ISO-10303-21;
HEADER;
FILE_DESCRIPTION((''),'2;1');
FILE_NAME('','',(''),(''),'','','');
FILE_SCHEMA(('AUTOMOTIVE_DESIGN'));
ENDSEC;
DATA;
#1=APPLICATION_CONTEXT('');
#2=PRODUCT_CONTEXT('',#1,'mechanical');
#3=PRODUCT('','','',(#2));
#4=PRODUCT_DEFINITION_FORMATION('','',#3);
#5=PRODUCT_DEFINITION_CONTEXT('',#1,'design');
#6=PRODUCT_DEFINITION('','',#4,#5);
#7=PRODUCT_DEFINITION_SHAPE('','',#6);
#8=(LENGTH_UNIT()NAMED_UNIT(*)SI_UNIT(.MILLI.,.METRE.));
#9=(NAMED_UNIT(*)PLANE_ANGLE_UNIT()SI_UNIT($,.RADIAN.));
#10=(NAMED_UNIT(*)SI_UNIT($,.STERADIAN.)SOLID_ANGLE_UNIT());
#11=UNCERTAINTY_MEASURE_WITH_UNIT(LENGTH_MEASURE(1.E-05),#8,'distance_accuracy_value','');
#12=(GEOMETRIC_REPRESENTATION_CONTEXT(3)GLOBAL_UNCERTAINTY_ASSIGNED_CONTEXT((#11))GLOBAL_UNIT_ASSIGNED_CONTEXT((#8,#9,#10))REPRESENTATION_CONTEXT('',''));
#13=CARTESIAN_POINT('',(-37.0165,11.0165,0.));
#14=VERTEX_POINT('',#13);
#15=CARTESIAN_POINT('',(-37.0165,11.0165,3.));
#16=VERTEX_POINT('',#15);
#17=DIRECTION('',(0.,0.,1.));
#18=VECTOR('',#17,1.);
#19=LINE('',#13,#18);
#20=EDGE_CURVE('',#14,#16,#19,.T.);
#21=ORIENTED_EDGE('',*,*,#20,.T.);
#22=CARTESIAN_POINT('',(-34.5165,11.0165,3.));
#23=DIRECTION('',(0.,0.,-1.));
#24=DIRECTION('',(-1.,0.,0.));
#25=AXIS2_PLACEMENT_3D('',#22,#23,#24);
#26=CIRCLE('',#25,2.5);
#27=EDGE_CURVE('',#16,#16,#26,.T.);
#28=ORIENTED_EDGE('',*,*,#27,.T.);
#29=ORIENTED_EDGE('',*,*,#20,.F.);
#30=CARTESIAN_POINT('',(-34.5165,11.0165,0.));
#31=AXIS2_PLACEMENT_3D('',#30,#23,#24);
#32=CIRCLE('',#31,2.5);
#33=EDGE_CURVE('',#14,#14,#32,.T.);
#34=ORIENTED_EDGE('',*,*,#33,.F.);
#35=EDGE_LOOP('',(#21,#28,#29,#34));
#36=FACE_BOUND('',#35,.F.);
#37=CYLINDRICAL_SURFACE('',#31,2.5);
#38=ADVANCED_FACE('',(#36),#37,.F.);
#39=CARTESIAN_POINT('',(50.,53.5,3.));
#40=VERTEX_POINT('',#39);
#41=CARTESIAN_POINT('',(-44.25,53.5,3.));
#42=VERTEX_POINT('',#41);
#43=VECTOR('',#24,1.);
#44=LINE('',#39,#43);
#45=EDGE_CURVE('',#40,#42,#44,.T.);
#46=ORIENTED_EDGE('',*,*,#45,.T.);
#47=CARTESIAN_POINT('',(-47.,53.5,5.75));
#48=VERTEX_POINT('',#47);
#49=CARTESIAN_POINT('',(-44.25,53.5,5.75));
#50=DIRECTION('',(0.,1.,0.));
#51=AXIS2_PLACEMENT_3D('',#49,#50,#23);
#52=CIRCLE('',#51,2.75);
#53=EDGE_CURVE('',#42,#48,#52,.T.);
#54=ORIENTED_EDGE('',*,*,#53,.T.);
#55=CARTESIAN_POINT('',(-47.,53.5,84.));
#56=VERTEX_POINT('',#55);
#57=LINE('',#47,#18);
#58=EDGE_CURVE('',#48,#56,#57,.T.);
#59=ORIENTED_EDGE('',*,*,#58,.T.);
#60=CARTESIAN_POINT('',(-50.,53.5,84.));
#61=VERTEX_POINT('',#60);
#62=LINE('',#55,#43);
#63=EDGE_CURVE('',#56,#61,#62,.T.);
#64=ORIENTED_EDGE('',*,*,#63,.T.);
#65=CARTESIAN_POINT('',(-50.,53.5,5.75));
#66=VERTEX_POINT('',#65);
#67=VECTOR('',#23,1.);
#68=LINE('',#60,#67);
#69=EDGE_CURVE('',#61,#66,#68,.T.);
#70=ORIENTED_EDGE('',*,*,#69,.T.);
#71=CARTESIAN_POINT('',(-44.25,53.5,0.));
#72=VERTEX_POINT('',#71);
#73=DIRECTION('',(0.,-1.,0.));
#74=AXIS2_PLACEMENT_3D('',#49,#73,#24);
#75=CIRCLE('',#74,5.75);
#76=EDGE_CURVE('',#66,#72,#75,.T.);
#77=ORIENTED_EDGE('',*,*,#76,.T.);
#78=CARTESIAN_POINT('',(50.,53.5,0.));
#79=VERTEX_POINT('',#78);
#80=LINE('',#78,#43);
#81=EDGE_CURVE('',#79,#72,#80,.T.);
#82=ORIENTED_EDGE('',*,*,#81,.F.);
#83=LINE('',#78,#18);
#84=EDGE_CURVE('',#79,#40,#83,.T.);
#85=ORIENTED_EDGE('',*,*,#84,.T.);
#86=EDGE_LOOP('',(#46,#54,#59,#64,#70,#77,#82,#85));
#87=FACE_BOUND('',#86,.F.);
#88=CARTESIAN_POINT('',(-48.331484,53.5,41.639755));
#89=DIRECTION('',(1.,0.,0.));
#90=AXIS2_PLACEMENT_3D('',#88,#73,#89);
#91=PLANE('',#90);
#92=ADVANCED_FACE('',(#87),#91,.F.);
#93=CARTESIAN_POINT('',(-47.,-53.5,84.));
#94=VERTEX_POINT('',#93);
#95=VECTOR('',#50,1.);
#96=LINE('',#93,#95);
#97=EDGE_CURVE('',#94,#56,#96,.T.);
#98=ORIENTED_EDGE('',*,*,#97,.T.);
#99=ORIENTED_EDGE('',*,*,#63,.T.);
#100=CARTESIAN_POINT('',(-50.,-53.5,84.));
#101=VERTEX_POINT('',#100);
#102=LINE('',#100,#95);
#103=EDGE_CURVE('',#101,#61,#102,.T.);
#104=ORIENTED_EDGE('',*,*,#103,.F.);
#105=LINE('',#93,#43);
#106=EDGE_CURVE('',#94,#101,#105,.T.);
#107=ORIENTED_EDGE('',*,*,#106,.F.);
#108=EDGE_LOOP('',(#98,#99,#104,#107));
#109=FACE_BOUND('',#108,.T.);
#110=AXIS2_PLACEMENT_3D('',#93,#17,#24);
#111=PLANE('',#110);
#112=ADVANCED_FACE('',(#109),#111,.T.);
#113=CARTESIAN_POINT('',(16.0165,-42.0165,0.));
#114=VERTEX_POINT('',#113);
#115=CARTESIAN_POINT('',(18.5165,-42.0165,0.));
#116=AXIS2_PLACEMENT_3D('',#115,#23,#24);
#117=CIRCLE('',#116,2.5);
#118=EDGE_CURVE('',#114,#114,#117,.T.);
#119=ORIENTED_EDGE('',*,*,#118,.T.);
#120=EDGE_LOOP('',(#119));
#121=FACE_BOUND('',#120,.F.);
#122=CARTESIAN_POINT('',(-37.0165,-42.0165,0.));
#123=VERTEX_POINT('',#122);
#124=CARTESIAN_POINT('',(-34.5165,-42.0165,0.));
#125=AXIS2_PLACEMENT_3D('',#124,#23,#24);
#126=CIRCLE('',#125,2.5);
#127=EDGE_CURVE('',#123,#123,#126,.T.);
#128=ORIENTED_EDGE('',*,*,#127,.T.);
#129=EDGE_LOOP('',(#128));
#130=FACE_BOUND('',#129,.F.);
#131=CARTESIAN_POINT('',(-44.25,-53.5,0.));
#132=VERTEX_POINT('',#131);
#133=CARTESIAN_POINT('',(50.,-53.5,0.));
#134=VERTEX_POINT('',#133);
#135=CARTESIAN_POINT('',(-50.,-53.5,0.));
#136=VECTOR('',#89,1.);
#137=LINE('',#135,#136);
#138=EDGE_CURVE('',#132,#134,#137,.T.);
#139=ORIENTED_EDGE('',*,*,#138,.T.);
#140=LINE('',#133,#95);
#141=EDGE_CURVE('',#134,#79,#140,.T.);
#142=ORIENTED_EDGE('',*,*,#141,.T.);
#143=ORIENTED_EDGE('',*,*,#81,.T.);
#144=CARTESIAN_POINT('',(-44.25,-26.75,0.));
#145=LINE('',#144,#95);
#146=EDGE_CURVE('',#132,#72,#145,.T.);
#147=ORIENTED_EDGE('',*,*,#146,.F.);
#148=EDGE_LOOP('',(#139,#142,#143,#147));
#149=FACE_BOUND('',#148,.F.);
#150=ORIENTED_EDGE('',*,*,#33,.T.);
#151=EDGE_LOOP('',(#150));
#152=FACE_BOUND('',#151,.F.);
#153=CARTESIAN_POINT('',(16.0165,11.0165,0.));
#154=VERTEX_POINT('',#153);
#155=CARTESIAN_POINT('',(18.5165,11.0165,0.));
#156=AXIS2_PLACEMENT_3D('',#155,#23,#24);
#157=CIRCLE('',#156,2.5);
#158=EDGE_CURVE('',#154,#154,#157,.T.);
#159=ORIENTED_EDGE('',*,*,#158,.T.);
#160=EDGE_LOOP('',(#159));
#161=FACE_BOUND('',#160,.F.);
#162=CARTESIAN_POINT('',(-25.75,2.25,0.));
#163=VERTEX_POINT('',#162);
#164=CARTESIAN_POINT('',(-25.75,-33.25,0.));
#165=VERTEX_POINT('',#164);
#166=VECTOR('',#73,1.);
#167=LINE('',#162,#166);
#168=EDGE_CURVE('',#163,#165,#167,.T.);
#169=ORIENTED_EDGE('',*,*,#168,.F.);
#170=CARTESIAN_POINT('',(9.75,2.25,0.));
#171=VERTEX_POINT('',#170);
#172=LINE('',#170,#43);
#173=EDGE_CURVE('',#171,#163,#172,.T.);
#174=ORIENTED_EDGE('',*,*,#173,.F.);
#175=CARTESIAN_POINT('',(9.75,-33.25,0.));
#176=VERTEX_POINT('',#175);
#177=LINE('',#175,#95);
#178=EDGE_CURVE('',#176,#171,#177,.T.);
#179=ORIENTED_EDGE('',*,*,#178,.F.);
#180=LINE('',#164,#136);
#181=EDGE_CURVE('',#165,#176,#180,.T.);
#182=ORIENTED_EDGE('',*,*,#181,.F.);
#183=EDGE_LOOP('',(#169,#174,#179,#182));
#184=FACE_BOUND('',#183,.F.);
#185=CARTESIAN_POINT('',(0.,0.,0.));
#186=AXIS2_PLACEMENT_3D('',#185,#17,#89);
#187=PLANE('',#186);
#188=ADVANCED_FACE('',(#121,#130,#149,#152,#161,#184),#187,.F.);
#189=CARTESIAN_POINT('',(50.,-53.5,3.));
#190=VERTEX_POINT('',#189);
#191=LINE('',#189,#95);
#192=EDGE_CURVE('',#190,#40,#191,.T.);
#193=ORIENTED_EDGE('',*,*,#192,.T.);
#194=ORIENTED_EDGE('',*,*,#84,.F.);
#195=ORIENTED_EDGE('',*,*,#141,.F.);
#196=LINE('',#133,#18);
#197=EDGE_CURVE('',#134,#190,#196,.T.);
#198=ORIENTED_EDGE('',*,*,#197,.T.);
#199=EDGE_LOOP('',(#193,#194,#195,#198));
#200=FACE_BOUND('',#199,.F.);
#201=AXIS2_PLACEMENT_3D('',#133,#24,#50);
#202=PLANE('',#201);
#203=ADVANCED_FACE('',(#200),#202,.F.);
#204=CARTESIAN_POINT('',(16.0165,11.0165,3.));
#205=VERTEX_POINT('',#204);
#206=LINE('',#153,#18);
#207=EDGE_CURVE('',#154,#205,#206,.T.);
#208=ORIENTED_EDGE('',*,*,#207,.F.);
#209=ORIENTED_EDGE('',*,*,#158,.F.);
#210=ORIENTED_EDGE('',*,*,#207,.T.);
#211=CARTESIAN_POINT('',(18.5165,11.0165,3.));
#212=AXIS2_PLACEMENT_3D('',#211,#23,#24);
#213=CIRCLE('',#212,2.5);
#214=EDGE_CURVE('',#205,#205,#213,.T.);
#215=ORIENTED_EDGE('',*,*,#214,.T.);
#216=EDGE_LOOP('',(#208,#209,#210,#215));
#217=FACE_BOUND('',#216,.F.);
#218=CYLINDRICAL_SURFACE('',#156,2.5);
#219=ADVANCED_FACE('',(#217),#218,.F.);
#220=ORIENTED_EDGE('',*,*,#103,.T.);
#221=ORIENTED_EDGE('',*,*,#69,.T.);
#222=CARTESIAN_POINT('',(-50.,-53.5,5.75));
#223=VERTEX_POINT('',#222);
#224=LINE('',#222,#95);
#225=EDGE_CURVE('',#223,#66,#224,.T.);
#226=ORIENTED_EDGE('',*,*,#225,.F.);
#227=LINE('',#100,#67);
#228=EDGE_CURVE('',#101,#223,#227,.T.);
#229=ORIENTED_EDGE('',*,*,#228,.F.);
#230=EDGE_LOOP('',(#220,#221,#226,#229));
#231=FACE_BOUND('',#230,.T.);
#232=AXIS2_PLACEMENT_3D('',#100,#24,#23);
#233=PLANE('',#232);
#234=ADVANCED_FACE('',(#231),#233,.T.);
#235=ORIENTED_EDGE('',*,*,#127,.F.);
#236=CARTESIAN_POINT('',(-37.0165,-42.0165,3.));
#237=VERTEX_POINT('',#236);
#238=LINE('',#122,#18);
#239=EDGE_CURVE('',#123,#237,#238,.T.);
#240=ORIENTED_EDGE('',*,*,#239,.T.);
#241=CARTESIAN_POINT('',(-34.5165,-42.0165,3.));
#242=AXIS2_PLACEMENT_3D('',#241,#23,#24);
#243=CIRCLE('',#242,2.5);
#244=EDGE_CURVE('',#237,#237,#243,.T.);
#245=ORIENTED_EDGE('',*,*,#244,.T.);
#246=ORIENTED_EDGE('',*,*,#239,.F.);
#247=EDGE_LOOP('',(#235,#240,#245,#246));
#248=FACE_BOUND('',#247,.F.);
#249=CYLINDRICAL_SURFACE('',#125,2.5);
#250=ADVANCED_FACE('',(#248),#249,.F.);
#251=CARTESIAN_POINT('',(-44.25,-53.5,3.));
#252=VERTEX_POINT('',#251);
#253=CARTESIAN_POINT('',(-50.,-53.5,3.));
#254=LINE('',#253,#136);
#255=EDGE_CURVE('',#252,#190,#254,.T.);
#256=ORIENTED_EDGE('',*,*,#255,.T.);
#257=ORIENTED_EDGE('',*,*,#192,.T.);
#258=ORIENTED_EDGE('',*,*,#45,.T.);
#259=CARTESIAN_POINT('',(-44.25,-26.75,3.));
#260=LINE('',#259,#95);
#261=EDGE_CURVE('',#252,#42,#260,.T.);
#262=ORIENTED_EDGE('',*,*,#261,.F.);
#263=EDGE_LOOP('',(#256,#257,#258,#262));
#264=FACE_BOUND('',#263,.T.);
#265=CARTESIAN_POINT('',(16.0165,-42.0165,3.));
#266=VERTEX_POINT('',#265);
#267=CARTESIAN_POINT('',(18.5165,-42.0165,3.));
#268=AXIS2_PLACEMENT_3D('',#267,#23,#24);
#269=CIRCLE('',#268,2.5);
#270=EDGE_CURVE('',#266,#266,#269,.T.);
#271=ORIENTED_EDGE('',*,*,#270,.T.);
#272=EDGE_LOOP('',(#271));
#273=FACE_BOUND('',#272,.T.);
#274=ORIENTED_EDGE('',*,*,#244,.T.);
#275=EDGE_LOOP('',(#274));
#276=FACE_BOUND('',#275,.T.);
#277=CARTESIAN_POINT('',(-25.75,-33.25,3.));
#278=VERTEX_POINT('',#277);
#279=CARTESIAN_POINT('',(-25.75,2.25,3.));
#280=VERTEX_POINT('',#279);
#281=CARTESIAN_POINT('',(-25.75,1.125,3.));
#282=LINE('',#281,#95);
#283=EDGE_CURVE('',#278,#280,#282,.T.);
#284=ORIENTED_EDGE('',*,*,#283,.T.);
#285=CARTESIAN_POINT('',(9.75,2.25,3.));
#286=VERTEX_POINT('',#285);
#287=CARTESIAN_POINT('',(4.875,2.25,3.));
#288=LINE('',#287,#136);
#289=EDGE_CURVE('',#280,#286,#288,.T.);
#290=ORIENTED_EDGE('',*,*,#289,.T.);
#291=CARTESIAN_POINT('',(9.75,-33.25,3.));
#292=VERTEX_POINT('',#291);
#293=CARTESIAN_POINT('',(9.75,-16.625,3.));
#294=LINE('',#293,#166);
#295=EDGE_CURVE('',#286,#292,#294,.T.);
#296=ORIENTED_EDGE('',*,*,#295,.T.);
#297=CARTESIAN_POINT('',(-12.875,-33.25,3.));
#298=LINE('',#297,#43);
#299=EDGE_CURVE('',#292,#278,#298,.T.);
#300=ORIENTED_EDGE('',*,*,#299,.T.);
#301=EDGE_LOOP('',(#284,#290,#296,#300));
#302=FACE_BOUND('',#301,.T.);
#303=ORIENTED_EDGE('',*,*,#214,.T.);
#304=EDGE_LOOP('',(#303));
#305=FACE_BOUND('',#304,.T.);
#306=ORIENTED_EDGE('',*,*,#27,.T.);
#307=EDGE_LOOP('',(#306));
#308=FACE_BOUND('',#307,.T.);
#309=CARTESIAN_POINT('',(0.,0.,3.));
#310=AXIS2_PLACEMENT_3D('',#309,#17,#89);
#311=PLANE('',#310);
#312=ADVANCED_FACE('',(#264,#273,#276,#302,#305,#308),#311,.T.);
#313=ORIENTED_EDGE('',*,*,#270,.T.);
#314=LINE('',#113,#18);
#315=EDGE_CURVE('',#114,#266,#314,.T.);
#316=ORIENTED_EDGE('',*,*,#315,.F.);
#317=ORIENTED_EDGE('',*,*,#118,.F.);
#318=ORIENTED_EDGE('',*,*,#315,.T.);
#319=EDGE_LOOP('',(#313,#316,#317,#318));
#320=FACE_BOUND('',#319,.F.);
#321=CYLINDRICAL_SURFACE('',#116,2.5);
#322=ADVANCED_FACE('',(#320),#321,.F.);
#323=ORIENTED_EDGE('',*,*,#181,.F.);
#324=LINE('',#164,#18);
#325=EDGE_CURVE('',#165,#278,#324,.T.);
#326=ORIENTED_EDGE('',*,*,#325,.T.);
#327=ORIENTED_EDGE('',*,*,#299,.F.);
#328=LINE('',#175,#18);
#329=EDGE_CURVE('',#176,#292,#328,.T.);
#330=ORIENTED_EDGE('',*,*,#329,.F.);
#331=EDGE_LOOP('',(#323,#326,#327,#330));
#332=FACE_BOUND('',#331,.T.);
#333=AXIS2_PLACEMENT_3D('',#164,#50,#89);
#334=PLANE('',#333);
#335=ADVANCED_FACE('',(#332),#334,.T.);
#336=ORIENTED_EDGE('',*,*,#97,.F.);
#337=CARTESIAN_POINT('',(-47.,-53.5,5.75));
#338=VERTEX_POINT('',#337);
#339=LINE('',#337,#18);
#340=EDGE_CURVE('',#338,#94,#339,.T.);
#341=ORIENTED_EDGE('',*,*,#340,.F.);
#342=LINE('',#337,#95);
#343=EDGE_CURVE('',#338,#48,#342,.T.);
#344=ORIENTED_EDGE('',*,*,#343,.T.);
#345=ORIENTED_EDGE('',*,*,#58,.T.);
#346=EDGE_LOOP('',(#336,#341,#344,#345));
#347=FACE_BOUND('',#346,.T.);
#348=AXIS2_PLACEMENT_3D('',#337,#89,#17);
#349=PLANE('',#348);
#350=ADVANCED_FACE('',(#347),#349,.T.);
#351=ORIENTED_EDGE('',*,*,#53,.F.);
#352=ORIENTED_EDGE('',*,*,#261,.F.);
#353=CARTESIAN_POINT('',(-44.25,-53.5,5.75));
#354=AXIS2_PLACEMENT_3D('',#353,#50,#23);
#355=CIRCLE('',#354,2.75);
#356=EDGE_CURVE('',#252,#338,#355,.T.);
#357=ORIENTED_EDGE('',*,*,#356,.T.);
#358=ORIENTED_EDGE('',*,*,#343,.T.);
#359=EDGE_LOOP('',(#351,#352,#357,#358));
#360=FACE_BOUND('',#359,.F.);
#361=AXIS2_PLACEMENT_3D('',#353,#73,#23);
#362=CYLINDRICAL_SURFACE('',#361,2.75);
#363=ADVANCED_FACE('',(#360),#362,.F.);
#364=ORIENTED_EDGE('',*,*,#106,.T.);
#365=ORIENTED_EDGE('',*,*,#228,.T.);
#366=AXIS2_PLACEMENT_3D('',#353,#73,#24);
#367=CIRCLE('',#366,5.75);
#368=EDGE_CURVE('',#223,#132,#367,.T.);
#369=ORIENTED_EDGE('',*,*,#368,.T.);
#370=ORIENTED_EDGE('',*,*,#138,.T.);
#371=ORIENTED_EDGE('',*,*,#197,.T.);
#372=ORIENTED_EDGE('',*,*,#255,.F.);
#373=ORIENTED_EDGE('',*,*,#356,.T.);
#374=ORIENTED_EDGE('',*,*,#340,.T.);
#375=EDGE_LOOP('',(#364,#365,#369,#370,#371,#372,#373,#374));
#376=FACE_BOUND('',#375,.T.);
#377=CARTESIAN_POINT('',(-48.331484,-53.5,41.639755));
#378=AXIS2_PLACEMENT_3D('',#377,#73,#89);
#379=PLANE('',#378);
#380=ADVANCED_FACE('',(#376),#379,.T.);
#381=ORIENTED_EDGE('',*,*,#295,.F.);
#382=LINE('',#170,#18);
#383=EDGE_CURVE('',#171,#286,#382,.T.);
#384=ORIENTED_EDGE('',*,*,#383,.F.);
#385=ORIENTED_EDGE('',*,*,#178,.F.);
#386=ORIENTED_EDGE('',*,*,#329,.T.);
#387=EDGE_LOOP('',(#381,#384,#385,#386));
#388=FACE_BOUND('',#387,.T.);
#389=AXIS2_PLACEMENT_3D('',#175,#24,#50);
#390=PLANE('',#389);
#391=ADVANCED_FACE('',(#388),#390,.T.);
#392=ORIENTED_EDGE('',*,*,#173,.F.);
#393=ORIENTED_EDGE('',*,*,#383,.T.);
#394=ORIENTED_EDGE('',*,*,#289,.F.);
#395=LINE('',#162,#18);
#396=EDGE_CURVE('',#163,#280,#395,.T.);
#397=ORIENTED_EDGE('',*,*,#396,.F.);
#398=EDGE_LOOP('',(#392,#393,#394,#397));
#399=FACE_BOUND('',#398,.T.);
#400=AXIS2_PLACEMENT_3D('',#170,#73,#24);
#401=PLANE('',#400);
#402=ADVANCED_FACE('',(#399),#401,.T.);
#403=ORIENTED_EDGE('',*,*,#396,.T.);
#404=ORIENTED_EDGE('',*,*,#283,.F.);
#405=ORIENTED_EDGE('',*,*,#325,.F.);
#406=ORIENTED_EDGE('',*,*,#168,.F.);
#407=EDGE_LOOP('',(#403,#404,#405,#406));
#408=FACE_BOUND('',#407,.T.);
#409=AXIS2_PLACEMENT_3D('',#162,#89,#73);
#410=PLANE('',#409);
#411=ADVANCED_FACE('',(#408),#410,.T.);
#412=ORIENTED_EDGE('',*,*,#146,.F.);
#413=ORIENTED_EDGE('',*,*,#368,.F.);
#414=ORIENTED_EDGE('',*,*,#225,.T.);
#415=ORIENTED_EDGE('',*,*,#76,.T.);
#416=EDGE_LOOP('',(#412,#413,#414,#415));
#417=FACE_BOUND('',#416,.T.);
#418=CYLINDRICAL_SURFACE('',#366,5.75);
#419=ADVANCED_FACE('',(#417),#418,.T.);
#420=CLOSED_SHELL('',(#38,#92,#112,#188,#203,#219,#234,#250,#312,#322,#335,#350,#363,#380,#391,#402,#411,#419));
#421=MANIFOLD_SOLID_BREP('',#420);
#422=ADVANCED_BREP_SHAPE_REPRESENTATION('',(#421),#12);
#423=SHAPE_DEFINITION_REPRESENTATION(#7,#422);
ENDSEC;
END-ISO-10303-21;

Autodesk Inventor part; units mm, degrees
ref_plane "YZ Plane" through (0, 0, 0) normal (1, 0, 0) x (0, 1, 0)
ref_plane "XZ Plane" through (0, 0, 0) normal (0, 1, 0) x (-1, 0, 0)
ref_plane "XY Plane" through (0, 0, 0) normal (0, 0, 1) x (1, 0, 0)
sketch "Sketch1" plane through (0, 0, 0) normal (0, 0, 1) x (1, 0, 0)
  line L0 (-50, -53.5) -> (50, -53.5)
  line L1 (50, -53.5) -> (50, 53.5)
  line L2 (50, 53.5) -> (-50, 53.5)
  line L3 (-50, 53.5) -> (-50, -53.5)
  line L4 (-50, -53.5) -> (50, 53.5) construction
  line L5 (50, -53.5) -> (-50, 53.5) construction
  point P0 (0, 0)
  dimension "d154" = 100
  dimension "d155" = 107
extrude "Plate5" add sketch "Sketch1" along normal blind 3
sketch "Sketch9" plane through (0, 0, 0) normal (0, 0, -1) x (-1, 0, 0)
  line L0 (25.75, -33.25) -> (-9.75, -33.25)
  line L1 (-9.75, -33.25) -> (-9.75, 2.25)
  line L2 (-9.75, 2.25) -> (25.75, 2.25)
  line L3 (25.75, 2.25) -> (25.75, -33.25)
  line L4 (25.75, -33.25) -> (-9.75, 2.25) construction
  line L5 (-9.75, -33.25) -> (25.75, 2.25) construction
  circle A0 centre (34.5165, -42.0165) radius 2.5
  circle A1 centre (-18.5165, -42.0165) radius 2.5
  circle A2 centre (-18.5165, 11.0165) radius 2.5
  circle A3 centre (34.5165, 11.0165) radius 2.5
  circle A4 centre (8, -15.5) radius 37.5 construction
  line L6 (-9.75, -33.25) -> (-18.5165, -42.0165) construction
  line L7 (50, 53.5) -> (50, -53.5) projected
  line L8 (-50, -53.5) -> (-50, 53.5) projected
  line L9 (50, -53.5) -> (-50, -53.5) projected
  line L10 (50, 53.5) -> (50, -53.5) projected
  line L11 (-50, 53.5) -> (50, 53.5) projected
  point P0 (0, 0)
  dimension "d173" = 35.5
  dimension "d174" = 35.5
  dimension "d175" = 5
  dimension "d176" = 12.3977
  dimension "d179" = 42
  dimension "d180" = 69
  dimension "d183" = 75
extrude "Extrusion3" cut sketch "Sketch9" against normal blind 10 contours L0 L1 L2 L3 | A0 | A1 | A2 | A3
sketch "Sketch7" plane through (-47, -53.5, 0) normal (-1, 0, 0) x (0, -1, 0)
  line L0 (-107, 0) -> (0, 0)
  line L1 (0, 0) -> (0, 84)
  line L2 (0, 84) -> (-107, 84)
  line L3 (-107, 84) -> (-107, 0)
edge flange "Flange3" height 84 angle 90 thickness 3 bend radius 2.75 thickness toward (-1, 0, 0) relief round relief width 3 relief depth 1.5 edges at (-50, 0, 3) wall of the first edge with corners at (-47, 53.5, 0) (-47, -53.5, 0) (-47, -53.5, 84) (-47, 53.5, 84)
bend "Bend3"
corner "Corner3"
properties part number "PNS 753 FDS 1200 FLANGE 2 up" material "Stainless Steel"
